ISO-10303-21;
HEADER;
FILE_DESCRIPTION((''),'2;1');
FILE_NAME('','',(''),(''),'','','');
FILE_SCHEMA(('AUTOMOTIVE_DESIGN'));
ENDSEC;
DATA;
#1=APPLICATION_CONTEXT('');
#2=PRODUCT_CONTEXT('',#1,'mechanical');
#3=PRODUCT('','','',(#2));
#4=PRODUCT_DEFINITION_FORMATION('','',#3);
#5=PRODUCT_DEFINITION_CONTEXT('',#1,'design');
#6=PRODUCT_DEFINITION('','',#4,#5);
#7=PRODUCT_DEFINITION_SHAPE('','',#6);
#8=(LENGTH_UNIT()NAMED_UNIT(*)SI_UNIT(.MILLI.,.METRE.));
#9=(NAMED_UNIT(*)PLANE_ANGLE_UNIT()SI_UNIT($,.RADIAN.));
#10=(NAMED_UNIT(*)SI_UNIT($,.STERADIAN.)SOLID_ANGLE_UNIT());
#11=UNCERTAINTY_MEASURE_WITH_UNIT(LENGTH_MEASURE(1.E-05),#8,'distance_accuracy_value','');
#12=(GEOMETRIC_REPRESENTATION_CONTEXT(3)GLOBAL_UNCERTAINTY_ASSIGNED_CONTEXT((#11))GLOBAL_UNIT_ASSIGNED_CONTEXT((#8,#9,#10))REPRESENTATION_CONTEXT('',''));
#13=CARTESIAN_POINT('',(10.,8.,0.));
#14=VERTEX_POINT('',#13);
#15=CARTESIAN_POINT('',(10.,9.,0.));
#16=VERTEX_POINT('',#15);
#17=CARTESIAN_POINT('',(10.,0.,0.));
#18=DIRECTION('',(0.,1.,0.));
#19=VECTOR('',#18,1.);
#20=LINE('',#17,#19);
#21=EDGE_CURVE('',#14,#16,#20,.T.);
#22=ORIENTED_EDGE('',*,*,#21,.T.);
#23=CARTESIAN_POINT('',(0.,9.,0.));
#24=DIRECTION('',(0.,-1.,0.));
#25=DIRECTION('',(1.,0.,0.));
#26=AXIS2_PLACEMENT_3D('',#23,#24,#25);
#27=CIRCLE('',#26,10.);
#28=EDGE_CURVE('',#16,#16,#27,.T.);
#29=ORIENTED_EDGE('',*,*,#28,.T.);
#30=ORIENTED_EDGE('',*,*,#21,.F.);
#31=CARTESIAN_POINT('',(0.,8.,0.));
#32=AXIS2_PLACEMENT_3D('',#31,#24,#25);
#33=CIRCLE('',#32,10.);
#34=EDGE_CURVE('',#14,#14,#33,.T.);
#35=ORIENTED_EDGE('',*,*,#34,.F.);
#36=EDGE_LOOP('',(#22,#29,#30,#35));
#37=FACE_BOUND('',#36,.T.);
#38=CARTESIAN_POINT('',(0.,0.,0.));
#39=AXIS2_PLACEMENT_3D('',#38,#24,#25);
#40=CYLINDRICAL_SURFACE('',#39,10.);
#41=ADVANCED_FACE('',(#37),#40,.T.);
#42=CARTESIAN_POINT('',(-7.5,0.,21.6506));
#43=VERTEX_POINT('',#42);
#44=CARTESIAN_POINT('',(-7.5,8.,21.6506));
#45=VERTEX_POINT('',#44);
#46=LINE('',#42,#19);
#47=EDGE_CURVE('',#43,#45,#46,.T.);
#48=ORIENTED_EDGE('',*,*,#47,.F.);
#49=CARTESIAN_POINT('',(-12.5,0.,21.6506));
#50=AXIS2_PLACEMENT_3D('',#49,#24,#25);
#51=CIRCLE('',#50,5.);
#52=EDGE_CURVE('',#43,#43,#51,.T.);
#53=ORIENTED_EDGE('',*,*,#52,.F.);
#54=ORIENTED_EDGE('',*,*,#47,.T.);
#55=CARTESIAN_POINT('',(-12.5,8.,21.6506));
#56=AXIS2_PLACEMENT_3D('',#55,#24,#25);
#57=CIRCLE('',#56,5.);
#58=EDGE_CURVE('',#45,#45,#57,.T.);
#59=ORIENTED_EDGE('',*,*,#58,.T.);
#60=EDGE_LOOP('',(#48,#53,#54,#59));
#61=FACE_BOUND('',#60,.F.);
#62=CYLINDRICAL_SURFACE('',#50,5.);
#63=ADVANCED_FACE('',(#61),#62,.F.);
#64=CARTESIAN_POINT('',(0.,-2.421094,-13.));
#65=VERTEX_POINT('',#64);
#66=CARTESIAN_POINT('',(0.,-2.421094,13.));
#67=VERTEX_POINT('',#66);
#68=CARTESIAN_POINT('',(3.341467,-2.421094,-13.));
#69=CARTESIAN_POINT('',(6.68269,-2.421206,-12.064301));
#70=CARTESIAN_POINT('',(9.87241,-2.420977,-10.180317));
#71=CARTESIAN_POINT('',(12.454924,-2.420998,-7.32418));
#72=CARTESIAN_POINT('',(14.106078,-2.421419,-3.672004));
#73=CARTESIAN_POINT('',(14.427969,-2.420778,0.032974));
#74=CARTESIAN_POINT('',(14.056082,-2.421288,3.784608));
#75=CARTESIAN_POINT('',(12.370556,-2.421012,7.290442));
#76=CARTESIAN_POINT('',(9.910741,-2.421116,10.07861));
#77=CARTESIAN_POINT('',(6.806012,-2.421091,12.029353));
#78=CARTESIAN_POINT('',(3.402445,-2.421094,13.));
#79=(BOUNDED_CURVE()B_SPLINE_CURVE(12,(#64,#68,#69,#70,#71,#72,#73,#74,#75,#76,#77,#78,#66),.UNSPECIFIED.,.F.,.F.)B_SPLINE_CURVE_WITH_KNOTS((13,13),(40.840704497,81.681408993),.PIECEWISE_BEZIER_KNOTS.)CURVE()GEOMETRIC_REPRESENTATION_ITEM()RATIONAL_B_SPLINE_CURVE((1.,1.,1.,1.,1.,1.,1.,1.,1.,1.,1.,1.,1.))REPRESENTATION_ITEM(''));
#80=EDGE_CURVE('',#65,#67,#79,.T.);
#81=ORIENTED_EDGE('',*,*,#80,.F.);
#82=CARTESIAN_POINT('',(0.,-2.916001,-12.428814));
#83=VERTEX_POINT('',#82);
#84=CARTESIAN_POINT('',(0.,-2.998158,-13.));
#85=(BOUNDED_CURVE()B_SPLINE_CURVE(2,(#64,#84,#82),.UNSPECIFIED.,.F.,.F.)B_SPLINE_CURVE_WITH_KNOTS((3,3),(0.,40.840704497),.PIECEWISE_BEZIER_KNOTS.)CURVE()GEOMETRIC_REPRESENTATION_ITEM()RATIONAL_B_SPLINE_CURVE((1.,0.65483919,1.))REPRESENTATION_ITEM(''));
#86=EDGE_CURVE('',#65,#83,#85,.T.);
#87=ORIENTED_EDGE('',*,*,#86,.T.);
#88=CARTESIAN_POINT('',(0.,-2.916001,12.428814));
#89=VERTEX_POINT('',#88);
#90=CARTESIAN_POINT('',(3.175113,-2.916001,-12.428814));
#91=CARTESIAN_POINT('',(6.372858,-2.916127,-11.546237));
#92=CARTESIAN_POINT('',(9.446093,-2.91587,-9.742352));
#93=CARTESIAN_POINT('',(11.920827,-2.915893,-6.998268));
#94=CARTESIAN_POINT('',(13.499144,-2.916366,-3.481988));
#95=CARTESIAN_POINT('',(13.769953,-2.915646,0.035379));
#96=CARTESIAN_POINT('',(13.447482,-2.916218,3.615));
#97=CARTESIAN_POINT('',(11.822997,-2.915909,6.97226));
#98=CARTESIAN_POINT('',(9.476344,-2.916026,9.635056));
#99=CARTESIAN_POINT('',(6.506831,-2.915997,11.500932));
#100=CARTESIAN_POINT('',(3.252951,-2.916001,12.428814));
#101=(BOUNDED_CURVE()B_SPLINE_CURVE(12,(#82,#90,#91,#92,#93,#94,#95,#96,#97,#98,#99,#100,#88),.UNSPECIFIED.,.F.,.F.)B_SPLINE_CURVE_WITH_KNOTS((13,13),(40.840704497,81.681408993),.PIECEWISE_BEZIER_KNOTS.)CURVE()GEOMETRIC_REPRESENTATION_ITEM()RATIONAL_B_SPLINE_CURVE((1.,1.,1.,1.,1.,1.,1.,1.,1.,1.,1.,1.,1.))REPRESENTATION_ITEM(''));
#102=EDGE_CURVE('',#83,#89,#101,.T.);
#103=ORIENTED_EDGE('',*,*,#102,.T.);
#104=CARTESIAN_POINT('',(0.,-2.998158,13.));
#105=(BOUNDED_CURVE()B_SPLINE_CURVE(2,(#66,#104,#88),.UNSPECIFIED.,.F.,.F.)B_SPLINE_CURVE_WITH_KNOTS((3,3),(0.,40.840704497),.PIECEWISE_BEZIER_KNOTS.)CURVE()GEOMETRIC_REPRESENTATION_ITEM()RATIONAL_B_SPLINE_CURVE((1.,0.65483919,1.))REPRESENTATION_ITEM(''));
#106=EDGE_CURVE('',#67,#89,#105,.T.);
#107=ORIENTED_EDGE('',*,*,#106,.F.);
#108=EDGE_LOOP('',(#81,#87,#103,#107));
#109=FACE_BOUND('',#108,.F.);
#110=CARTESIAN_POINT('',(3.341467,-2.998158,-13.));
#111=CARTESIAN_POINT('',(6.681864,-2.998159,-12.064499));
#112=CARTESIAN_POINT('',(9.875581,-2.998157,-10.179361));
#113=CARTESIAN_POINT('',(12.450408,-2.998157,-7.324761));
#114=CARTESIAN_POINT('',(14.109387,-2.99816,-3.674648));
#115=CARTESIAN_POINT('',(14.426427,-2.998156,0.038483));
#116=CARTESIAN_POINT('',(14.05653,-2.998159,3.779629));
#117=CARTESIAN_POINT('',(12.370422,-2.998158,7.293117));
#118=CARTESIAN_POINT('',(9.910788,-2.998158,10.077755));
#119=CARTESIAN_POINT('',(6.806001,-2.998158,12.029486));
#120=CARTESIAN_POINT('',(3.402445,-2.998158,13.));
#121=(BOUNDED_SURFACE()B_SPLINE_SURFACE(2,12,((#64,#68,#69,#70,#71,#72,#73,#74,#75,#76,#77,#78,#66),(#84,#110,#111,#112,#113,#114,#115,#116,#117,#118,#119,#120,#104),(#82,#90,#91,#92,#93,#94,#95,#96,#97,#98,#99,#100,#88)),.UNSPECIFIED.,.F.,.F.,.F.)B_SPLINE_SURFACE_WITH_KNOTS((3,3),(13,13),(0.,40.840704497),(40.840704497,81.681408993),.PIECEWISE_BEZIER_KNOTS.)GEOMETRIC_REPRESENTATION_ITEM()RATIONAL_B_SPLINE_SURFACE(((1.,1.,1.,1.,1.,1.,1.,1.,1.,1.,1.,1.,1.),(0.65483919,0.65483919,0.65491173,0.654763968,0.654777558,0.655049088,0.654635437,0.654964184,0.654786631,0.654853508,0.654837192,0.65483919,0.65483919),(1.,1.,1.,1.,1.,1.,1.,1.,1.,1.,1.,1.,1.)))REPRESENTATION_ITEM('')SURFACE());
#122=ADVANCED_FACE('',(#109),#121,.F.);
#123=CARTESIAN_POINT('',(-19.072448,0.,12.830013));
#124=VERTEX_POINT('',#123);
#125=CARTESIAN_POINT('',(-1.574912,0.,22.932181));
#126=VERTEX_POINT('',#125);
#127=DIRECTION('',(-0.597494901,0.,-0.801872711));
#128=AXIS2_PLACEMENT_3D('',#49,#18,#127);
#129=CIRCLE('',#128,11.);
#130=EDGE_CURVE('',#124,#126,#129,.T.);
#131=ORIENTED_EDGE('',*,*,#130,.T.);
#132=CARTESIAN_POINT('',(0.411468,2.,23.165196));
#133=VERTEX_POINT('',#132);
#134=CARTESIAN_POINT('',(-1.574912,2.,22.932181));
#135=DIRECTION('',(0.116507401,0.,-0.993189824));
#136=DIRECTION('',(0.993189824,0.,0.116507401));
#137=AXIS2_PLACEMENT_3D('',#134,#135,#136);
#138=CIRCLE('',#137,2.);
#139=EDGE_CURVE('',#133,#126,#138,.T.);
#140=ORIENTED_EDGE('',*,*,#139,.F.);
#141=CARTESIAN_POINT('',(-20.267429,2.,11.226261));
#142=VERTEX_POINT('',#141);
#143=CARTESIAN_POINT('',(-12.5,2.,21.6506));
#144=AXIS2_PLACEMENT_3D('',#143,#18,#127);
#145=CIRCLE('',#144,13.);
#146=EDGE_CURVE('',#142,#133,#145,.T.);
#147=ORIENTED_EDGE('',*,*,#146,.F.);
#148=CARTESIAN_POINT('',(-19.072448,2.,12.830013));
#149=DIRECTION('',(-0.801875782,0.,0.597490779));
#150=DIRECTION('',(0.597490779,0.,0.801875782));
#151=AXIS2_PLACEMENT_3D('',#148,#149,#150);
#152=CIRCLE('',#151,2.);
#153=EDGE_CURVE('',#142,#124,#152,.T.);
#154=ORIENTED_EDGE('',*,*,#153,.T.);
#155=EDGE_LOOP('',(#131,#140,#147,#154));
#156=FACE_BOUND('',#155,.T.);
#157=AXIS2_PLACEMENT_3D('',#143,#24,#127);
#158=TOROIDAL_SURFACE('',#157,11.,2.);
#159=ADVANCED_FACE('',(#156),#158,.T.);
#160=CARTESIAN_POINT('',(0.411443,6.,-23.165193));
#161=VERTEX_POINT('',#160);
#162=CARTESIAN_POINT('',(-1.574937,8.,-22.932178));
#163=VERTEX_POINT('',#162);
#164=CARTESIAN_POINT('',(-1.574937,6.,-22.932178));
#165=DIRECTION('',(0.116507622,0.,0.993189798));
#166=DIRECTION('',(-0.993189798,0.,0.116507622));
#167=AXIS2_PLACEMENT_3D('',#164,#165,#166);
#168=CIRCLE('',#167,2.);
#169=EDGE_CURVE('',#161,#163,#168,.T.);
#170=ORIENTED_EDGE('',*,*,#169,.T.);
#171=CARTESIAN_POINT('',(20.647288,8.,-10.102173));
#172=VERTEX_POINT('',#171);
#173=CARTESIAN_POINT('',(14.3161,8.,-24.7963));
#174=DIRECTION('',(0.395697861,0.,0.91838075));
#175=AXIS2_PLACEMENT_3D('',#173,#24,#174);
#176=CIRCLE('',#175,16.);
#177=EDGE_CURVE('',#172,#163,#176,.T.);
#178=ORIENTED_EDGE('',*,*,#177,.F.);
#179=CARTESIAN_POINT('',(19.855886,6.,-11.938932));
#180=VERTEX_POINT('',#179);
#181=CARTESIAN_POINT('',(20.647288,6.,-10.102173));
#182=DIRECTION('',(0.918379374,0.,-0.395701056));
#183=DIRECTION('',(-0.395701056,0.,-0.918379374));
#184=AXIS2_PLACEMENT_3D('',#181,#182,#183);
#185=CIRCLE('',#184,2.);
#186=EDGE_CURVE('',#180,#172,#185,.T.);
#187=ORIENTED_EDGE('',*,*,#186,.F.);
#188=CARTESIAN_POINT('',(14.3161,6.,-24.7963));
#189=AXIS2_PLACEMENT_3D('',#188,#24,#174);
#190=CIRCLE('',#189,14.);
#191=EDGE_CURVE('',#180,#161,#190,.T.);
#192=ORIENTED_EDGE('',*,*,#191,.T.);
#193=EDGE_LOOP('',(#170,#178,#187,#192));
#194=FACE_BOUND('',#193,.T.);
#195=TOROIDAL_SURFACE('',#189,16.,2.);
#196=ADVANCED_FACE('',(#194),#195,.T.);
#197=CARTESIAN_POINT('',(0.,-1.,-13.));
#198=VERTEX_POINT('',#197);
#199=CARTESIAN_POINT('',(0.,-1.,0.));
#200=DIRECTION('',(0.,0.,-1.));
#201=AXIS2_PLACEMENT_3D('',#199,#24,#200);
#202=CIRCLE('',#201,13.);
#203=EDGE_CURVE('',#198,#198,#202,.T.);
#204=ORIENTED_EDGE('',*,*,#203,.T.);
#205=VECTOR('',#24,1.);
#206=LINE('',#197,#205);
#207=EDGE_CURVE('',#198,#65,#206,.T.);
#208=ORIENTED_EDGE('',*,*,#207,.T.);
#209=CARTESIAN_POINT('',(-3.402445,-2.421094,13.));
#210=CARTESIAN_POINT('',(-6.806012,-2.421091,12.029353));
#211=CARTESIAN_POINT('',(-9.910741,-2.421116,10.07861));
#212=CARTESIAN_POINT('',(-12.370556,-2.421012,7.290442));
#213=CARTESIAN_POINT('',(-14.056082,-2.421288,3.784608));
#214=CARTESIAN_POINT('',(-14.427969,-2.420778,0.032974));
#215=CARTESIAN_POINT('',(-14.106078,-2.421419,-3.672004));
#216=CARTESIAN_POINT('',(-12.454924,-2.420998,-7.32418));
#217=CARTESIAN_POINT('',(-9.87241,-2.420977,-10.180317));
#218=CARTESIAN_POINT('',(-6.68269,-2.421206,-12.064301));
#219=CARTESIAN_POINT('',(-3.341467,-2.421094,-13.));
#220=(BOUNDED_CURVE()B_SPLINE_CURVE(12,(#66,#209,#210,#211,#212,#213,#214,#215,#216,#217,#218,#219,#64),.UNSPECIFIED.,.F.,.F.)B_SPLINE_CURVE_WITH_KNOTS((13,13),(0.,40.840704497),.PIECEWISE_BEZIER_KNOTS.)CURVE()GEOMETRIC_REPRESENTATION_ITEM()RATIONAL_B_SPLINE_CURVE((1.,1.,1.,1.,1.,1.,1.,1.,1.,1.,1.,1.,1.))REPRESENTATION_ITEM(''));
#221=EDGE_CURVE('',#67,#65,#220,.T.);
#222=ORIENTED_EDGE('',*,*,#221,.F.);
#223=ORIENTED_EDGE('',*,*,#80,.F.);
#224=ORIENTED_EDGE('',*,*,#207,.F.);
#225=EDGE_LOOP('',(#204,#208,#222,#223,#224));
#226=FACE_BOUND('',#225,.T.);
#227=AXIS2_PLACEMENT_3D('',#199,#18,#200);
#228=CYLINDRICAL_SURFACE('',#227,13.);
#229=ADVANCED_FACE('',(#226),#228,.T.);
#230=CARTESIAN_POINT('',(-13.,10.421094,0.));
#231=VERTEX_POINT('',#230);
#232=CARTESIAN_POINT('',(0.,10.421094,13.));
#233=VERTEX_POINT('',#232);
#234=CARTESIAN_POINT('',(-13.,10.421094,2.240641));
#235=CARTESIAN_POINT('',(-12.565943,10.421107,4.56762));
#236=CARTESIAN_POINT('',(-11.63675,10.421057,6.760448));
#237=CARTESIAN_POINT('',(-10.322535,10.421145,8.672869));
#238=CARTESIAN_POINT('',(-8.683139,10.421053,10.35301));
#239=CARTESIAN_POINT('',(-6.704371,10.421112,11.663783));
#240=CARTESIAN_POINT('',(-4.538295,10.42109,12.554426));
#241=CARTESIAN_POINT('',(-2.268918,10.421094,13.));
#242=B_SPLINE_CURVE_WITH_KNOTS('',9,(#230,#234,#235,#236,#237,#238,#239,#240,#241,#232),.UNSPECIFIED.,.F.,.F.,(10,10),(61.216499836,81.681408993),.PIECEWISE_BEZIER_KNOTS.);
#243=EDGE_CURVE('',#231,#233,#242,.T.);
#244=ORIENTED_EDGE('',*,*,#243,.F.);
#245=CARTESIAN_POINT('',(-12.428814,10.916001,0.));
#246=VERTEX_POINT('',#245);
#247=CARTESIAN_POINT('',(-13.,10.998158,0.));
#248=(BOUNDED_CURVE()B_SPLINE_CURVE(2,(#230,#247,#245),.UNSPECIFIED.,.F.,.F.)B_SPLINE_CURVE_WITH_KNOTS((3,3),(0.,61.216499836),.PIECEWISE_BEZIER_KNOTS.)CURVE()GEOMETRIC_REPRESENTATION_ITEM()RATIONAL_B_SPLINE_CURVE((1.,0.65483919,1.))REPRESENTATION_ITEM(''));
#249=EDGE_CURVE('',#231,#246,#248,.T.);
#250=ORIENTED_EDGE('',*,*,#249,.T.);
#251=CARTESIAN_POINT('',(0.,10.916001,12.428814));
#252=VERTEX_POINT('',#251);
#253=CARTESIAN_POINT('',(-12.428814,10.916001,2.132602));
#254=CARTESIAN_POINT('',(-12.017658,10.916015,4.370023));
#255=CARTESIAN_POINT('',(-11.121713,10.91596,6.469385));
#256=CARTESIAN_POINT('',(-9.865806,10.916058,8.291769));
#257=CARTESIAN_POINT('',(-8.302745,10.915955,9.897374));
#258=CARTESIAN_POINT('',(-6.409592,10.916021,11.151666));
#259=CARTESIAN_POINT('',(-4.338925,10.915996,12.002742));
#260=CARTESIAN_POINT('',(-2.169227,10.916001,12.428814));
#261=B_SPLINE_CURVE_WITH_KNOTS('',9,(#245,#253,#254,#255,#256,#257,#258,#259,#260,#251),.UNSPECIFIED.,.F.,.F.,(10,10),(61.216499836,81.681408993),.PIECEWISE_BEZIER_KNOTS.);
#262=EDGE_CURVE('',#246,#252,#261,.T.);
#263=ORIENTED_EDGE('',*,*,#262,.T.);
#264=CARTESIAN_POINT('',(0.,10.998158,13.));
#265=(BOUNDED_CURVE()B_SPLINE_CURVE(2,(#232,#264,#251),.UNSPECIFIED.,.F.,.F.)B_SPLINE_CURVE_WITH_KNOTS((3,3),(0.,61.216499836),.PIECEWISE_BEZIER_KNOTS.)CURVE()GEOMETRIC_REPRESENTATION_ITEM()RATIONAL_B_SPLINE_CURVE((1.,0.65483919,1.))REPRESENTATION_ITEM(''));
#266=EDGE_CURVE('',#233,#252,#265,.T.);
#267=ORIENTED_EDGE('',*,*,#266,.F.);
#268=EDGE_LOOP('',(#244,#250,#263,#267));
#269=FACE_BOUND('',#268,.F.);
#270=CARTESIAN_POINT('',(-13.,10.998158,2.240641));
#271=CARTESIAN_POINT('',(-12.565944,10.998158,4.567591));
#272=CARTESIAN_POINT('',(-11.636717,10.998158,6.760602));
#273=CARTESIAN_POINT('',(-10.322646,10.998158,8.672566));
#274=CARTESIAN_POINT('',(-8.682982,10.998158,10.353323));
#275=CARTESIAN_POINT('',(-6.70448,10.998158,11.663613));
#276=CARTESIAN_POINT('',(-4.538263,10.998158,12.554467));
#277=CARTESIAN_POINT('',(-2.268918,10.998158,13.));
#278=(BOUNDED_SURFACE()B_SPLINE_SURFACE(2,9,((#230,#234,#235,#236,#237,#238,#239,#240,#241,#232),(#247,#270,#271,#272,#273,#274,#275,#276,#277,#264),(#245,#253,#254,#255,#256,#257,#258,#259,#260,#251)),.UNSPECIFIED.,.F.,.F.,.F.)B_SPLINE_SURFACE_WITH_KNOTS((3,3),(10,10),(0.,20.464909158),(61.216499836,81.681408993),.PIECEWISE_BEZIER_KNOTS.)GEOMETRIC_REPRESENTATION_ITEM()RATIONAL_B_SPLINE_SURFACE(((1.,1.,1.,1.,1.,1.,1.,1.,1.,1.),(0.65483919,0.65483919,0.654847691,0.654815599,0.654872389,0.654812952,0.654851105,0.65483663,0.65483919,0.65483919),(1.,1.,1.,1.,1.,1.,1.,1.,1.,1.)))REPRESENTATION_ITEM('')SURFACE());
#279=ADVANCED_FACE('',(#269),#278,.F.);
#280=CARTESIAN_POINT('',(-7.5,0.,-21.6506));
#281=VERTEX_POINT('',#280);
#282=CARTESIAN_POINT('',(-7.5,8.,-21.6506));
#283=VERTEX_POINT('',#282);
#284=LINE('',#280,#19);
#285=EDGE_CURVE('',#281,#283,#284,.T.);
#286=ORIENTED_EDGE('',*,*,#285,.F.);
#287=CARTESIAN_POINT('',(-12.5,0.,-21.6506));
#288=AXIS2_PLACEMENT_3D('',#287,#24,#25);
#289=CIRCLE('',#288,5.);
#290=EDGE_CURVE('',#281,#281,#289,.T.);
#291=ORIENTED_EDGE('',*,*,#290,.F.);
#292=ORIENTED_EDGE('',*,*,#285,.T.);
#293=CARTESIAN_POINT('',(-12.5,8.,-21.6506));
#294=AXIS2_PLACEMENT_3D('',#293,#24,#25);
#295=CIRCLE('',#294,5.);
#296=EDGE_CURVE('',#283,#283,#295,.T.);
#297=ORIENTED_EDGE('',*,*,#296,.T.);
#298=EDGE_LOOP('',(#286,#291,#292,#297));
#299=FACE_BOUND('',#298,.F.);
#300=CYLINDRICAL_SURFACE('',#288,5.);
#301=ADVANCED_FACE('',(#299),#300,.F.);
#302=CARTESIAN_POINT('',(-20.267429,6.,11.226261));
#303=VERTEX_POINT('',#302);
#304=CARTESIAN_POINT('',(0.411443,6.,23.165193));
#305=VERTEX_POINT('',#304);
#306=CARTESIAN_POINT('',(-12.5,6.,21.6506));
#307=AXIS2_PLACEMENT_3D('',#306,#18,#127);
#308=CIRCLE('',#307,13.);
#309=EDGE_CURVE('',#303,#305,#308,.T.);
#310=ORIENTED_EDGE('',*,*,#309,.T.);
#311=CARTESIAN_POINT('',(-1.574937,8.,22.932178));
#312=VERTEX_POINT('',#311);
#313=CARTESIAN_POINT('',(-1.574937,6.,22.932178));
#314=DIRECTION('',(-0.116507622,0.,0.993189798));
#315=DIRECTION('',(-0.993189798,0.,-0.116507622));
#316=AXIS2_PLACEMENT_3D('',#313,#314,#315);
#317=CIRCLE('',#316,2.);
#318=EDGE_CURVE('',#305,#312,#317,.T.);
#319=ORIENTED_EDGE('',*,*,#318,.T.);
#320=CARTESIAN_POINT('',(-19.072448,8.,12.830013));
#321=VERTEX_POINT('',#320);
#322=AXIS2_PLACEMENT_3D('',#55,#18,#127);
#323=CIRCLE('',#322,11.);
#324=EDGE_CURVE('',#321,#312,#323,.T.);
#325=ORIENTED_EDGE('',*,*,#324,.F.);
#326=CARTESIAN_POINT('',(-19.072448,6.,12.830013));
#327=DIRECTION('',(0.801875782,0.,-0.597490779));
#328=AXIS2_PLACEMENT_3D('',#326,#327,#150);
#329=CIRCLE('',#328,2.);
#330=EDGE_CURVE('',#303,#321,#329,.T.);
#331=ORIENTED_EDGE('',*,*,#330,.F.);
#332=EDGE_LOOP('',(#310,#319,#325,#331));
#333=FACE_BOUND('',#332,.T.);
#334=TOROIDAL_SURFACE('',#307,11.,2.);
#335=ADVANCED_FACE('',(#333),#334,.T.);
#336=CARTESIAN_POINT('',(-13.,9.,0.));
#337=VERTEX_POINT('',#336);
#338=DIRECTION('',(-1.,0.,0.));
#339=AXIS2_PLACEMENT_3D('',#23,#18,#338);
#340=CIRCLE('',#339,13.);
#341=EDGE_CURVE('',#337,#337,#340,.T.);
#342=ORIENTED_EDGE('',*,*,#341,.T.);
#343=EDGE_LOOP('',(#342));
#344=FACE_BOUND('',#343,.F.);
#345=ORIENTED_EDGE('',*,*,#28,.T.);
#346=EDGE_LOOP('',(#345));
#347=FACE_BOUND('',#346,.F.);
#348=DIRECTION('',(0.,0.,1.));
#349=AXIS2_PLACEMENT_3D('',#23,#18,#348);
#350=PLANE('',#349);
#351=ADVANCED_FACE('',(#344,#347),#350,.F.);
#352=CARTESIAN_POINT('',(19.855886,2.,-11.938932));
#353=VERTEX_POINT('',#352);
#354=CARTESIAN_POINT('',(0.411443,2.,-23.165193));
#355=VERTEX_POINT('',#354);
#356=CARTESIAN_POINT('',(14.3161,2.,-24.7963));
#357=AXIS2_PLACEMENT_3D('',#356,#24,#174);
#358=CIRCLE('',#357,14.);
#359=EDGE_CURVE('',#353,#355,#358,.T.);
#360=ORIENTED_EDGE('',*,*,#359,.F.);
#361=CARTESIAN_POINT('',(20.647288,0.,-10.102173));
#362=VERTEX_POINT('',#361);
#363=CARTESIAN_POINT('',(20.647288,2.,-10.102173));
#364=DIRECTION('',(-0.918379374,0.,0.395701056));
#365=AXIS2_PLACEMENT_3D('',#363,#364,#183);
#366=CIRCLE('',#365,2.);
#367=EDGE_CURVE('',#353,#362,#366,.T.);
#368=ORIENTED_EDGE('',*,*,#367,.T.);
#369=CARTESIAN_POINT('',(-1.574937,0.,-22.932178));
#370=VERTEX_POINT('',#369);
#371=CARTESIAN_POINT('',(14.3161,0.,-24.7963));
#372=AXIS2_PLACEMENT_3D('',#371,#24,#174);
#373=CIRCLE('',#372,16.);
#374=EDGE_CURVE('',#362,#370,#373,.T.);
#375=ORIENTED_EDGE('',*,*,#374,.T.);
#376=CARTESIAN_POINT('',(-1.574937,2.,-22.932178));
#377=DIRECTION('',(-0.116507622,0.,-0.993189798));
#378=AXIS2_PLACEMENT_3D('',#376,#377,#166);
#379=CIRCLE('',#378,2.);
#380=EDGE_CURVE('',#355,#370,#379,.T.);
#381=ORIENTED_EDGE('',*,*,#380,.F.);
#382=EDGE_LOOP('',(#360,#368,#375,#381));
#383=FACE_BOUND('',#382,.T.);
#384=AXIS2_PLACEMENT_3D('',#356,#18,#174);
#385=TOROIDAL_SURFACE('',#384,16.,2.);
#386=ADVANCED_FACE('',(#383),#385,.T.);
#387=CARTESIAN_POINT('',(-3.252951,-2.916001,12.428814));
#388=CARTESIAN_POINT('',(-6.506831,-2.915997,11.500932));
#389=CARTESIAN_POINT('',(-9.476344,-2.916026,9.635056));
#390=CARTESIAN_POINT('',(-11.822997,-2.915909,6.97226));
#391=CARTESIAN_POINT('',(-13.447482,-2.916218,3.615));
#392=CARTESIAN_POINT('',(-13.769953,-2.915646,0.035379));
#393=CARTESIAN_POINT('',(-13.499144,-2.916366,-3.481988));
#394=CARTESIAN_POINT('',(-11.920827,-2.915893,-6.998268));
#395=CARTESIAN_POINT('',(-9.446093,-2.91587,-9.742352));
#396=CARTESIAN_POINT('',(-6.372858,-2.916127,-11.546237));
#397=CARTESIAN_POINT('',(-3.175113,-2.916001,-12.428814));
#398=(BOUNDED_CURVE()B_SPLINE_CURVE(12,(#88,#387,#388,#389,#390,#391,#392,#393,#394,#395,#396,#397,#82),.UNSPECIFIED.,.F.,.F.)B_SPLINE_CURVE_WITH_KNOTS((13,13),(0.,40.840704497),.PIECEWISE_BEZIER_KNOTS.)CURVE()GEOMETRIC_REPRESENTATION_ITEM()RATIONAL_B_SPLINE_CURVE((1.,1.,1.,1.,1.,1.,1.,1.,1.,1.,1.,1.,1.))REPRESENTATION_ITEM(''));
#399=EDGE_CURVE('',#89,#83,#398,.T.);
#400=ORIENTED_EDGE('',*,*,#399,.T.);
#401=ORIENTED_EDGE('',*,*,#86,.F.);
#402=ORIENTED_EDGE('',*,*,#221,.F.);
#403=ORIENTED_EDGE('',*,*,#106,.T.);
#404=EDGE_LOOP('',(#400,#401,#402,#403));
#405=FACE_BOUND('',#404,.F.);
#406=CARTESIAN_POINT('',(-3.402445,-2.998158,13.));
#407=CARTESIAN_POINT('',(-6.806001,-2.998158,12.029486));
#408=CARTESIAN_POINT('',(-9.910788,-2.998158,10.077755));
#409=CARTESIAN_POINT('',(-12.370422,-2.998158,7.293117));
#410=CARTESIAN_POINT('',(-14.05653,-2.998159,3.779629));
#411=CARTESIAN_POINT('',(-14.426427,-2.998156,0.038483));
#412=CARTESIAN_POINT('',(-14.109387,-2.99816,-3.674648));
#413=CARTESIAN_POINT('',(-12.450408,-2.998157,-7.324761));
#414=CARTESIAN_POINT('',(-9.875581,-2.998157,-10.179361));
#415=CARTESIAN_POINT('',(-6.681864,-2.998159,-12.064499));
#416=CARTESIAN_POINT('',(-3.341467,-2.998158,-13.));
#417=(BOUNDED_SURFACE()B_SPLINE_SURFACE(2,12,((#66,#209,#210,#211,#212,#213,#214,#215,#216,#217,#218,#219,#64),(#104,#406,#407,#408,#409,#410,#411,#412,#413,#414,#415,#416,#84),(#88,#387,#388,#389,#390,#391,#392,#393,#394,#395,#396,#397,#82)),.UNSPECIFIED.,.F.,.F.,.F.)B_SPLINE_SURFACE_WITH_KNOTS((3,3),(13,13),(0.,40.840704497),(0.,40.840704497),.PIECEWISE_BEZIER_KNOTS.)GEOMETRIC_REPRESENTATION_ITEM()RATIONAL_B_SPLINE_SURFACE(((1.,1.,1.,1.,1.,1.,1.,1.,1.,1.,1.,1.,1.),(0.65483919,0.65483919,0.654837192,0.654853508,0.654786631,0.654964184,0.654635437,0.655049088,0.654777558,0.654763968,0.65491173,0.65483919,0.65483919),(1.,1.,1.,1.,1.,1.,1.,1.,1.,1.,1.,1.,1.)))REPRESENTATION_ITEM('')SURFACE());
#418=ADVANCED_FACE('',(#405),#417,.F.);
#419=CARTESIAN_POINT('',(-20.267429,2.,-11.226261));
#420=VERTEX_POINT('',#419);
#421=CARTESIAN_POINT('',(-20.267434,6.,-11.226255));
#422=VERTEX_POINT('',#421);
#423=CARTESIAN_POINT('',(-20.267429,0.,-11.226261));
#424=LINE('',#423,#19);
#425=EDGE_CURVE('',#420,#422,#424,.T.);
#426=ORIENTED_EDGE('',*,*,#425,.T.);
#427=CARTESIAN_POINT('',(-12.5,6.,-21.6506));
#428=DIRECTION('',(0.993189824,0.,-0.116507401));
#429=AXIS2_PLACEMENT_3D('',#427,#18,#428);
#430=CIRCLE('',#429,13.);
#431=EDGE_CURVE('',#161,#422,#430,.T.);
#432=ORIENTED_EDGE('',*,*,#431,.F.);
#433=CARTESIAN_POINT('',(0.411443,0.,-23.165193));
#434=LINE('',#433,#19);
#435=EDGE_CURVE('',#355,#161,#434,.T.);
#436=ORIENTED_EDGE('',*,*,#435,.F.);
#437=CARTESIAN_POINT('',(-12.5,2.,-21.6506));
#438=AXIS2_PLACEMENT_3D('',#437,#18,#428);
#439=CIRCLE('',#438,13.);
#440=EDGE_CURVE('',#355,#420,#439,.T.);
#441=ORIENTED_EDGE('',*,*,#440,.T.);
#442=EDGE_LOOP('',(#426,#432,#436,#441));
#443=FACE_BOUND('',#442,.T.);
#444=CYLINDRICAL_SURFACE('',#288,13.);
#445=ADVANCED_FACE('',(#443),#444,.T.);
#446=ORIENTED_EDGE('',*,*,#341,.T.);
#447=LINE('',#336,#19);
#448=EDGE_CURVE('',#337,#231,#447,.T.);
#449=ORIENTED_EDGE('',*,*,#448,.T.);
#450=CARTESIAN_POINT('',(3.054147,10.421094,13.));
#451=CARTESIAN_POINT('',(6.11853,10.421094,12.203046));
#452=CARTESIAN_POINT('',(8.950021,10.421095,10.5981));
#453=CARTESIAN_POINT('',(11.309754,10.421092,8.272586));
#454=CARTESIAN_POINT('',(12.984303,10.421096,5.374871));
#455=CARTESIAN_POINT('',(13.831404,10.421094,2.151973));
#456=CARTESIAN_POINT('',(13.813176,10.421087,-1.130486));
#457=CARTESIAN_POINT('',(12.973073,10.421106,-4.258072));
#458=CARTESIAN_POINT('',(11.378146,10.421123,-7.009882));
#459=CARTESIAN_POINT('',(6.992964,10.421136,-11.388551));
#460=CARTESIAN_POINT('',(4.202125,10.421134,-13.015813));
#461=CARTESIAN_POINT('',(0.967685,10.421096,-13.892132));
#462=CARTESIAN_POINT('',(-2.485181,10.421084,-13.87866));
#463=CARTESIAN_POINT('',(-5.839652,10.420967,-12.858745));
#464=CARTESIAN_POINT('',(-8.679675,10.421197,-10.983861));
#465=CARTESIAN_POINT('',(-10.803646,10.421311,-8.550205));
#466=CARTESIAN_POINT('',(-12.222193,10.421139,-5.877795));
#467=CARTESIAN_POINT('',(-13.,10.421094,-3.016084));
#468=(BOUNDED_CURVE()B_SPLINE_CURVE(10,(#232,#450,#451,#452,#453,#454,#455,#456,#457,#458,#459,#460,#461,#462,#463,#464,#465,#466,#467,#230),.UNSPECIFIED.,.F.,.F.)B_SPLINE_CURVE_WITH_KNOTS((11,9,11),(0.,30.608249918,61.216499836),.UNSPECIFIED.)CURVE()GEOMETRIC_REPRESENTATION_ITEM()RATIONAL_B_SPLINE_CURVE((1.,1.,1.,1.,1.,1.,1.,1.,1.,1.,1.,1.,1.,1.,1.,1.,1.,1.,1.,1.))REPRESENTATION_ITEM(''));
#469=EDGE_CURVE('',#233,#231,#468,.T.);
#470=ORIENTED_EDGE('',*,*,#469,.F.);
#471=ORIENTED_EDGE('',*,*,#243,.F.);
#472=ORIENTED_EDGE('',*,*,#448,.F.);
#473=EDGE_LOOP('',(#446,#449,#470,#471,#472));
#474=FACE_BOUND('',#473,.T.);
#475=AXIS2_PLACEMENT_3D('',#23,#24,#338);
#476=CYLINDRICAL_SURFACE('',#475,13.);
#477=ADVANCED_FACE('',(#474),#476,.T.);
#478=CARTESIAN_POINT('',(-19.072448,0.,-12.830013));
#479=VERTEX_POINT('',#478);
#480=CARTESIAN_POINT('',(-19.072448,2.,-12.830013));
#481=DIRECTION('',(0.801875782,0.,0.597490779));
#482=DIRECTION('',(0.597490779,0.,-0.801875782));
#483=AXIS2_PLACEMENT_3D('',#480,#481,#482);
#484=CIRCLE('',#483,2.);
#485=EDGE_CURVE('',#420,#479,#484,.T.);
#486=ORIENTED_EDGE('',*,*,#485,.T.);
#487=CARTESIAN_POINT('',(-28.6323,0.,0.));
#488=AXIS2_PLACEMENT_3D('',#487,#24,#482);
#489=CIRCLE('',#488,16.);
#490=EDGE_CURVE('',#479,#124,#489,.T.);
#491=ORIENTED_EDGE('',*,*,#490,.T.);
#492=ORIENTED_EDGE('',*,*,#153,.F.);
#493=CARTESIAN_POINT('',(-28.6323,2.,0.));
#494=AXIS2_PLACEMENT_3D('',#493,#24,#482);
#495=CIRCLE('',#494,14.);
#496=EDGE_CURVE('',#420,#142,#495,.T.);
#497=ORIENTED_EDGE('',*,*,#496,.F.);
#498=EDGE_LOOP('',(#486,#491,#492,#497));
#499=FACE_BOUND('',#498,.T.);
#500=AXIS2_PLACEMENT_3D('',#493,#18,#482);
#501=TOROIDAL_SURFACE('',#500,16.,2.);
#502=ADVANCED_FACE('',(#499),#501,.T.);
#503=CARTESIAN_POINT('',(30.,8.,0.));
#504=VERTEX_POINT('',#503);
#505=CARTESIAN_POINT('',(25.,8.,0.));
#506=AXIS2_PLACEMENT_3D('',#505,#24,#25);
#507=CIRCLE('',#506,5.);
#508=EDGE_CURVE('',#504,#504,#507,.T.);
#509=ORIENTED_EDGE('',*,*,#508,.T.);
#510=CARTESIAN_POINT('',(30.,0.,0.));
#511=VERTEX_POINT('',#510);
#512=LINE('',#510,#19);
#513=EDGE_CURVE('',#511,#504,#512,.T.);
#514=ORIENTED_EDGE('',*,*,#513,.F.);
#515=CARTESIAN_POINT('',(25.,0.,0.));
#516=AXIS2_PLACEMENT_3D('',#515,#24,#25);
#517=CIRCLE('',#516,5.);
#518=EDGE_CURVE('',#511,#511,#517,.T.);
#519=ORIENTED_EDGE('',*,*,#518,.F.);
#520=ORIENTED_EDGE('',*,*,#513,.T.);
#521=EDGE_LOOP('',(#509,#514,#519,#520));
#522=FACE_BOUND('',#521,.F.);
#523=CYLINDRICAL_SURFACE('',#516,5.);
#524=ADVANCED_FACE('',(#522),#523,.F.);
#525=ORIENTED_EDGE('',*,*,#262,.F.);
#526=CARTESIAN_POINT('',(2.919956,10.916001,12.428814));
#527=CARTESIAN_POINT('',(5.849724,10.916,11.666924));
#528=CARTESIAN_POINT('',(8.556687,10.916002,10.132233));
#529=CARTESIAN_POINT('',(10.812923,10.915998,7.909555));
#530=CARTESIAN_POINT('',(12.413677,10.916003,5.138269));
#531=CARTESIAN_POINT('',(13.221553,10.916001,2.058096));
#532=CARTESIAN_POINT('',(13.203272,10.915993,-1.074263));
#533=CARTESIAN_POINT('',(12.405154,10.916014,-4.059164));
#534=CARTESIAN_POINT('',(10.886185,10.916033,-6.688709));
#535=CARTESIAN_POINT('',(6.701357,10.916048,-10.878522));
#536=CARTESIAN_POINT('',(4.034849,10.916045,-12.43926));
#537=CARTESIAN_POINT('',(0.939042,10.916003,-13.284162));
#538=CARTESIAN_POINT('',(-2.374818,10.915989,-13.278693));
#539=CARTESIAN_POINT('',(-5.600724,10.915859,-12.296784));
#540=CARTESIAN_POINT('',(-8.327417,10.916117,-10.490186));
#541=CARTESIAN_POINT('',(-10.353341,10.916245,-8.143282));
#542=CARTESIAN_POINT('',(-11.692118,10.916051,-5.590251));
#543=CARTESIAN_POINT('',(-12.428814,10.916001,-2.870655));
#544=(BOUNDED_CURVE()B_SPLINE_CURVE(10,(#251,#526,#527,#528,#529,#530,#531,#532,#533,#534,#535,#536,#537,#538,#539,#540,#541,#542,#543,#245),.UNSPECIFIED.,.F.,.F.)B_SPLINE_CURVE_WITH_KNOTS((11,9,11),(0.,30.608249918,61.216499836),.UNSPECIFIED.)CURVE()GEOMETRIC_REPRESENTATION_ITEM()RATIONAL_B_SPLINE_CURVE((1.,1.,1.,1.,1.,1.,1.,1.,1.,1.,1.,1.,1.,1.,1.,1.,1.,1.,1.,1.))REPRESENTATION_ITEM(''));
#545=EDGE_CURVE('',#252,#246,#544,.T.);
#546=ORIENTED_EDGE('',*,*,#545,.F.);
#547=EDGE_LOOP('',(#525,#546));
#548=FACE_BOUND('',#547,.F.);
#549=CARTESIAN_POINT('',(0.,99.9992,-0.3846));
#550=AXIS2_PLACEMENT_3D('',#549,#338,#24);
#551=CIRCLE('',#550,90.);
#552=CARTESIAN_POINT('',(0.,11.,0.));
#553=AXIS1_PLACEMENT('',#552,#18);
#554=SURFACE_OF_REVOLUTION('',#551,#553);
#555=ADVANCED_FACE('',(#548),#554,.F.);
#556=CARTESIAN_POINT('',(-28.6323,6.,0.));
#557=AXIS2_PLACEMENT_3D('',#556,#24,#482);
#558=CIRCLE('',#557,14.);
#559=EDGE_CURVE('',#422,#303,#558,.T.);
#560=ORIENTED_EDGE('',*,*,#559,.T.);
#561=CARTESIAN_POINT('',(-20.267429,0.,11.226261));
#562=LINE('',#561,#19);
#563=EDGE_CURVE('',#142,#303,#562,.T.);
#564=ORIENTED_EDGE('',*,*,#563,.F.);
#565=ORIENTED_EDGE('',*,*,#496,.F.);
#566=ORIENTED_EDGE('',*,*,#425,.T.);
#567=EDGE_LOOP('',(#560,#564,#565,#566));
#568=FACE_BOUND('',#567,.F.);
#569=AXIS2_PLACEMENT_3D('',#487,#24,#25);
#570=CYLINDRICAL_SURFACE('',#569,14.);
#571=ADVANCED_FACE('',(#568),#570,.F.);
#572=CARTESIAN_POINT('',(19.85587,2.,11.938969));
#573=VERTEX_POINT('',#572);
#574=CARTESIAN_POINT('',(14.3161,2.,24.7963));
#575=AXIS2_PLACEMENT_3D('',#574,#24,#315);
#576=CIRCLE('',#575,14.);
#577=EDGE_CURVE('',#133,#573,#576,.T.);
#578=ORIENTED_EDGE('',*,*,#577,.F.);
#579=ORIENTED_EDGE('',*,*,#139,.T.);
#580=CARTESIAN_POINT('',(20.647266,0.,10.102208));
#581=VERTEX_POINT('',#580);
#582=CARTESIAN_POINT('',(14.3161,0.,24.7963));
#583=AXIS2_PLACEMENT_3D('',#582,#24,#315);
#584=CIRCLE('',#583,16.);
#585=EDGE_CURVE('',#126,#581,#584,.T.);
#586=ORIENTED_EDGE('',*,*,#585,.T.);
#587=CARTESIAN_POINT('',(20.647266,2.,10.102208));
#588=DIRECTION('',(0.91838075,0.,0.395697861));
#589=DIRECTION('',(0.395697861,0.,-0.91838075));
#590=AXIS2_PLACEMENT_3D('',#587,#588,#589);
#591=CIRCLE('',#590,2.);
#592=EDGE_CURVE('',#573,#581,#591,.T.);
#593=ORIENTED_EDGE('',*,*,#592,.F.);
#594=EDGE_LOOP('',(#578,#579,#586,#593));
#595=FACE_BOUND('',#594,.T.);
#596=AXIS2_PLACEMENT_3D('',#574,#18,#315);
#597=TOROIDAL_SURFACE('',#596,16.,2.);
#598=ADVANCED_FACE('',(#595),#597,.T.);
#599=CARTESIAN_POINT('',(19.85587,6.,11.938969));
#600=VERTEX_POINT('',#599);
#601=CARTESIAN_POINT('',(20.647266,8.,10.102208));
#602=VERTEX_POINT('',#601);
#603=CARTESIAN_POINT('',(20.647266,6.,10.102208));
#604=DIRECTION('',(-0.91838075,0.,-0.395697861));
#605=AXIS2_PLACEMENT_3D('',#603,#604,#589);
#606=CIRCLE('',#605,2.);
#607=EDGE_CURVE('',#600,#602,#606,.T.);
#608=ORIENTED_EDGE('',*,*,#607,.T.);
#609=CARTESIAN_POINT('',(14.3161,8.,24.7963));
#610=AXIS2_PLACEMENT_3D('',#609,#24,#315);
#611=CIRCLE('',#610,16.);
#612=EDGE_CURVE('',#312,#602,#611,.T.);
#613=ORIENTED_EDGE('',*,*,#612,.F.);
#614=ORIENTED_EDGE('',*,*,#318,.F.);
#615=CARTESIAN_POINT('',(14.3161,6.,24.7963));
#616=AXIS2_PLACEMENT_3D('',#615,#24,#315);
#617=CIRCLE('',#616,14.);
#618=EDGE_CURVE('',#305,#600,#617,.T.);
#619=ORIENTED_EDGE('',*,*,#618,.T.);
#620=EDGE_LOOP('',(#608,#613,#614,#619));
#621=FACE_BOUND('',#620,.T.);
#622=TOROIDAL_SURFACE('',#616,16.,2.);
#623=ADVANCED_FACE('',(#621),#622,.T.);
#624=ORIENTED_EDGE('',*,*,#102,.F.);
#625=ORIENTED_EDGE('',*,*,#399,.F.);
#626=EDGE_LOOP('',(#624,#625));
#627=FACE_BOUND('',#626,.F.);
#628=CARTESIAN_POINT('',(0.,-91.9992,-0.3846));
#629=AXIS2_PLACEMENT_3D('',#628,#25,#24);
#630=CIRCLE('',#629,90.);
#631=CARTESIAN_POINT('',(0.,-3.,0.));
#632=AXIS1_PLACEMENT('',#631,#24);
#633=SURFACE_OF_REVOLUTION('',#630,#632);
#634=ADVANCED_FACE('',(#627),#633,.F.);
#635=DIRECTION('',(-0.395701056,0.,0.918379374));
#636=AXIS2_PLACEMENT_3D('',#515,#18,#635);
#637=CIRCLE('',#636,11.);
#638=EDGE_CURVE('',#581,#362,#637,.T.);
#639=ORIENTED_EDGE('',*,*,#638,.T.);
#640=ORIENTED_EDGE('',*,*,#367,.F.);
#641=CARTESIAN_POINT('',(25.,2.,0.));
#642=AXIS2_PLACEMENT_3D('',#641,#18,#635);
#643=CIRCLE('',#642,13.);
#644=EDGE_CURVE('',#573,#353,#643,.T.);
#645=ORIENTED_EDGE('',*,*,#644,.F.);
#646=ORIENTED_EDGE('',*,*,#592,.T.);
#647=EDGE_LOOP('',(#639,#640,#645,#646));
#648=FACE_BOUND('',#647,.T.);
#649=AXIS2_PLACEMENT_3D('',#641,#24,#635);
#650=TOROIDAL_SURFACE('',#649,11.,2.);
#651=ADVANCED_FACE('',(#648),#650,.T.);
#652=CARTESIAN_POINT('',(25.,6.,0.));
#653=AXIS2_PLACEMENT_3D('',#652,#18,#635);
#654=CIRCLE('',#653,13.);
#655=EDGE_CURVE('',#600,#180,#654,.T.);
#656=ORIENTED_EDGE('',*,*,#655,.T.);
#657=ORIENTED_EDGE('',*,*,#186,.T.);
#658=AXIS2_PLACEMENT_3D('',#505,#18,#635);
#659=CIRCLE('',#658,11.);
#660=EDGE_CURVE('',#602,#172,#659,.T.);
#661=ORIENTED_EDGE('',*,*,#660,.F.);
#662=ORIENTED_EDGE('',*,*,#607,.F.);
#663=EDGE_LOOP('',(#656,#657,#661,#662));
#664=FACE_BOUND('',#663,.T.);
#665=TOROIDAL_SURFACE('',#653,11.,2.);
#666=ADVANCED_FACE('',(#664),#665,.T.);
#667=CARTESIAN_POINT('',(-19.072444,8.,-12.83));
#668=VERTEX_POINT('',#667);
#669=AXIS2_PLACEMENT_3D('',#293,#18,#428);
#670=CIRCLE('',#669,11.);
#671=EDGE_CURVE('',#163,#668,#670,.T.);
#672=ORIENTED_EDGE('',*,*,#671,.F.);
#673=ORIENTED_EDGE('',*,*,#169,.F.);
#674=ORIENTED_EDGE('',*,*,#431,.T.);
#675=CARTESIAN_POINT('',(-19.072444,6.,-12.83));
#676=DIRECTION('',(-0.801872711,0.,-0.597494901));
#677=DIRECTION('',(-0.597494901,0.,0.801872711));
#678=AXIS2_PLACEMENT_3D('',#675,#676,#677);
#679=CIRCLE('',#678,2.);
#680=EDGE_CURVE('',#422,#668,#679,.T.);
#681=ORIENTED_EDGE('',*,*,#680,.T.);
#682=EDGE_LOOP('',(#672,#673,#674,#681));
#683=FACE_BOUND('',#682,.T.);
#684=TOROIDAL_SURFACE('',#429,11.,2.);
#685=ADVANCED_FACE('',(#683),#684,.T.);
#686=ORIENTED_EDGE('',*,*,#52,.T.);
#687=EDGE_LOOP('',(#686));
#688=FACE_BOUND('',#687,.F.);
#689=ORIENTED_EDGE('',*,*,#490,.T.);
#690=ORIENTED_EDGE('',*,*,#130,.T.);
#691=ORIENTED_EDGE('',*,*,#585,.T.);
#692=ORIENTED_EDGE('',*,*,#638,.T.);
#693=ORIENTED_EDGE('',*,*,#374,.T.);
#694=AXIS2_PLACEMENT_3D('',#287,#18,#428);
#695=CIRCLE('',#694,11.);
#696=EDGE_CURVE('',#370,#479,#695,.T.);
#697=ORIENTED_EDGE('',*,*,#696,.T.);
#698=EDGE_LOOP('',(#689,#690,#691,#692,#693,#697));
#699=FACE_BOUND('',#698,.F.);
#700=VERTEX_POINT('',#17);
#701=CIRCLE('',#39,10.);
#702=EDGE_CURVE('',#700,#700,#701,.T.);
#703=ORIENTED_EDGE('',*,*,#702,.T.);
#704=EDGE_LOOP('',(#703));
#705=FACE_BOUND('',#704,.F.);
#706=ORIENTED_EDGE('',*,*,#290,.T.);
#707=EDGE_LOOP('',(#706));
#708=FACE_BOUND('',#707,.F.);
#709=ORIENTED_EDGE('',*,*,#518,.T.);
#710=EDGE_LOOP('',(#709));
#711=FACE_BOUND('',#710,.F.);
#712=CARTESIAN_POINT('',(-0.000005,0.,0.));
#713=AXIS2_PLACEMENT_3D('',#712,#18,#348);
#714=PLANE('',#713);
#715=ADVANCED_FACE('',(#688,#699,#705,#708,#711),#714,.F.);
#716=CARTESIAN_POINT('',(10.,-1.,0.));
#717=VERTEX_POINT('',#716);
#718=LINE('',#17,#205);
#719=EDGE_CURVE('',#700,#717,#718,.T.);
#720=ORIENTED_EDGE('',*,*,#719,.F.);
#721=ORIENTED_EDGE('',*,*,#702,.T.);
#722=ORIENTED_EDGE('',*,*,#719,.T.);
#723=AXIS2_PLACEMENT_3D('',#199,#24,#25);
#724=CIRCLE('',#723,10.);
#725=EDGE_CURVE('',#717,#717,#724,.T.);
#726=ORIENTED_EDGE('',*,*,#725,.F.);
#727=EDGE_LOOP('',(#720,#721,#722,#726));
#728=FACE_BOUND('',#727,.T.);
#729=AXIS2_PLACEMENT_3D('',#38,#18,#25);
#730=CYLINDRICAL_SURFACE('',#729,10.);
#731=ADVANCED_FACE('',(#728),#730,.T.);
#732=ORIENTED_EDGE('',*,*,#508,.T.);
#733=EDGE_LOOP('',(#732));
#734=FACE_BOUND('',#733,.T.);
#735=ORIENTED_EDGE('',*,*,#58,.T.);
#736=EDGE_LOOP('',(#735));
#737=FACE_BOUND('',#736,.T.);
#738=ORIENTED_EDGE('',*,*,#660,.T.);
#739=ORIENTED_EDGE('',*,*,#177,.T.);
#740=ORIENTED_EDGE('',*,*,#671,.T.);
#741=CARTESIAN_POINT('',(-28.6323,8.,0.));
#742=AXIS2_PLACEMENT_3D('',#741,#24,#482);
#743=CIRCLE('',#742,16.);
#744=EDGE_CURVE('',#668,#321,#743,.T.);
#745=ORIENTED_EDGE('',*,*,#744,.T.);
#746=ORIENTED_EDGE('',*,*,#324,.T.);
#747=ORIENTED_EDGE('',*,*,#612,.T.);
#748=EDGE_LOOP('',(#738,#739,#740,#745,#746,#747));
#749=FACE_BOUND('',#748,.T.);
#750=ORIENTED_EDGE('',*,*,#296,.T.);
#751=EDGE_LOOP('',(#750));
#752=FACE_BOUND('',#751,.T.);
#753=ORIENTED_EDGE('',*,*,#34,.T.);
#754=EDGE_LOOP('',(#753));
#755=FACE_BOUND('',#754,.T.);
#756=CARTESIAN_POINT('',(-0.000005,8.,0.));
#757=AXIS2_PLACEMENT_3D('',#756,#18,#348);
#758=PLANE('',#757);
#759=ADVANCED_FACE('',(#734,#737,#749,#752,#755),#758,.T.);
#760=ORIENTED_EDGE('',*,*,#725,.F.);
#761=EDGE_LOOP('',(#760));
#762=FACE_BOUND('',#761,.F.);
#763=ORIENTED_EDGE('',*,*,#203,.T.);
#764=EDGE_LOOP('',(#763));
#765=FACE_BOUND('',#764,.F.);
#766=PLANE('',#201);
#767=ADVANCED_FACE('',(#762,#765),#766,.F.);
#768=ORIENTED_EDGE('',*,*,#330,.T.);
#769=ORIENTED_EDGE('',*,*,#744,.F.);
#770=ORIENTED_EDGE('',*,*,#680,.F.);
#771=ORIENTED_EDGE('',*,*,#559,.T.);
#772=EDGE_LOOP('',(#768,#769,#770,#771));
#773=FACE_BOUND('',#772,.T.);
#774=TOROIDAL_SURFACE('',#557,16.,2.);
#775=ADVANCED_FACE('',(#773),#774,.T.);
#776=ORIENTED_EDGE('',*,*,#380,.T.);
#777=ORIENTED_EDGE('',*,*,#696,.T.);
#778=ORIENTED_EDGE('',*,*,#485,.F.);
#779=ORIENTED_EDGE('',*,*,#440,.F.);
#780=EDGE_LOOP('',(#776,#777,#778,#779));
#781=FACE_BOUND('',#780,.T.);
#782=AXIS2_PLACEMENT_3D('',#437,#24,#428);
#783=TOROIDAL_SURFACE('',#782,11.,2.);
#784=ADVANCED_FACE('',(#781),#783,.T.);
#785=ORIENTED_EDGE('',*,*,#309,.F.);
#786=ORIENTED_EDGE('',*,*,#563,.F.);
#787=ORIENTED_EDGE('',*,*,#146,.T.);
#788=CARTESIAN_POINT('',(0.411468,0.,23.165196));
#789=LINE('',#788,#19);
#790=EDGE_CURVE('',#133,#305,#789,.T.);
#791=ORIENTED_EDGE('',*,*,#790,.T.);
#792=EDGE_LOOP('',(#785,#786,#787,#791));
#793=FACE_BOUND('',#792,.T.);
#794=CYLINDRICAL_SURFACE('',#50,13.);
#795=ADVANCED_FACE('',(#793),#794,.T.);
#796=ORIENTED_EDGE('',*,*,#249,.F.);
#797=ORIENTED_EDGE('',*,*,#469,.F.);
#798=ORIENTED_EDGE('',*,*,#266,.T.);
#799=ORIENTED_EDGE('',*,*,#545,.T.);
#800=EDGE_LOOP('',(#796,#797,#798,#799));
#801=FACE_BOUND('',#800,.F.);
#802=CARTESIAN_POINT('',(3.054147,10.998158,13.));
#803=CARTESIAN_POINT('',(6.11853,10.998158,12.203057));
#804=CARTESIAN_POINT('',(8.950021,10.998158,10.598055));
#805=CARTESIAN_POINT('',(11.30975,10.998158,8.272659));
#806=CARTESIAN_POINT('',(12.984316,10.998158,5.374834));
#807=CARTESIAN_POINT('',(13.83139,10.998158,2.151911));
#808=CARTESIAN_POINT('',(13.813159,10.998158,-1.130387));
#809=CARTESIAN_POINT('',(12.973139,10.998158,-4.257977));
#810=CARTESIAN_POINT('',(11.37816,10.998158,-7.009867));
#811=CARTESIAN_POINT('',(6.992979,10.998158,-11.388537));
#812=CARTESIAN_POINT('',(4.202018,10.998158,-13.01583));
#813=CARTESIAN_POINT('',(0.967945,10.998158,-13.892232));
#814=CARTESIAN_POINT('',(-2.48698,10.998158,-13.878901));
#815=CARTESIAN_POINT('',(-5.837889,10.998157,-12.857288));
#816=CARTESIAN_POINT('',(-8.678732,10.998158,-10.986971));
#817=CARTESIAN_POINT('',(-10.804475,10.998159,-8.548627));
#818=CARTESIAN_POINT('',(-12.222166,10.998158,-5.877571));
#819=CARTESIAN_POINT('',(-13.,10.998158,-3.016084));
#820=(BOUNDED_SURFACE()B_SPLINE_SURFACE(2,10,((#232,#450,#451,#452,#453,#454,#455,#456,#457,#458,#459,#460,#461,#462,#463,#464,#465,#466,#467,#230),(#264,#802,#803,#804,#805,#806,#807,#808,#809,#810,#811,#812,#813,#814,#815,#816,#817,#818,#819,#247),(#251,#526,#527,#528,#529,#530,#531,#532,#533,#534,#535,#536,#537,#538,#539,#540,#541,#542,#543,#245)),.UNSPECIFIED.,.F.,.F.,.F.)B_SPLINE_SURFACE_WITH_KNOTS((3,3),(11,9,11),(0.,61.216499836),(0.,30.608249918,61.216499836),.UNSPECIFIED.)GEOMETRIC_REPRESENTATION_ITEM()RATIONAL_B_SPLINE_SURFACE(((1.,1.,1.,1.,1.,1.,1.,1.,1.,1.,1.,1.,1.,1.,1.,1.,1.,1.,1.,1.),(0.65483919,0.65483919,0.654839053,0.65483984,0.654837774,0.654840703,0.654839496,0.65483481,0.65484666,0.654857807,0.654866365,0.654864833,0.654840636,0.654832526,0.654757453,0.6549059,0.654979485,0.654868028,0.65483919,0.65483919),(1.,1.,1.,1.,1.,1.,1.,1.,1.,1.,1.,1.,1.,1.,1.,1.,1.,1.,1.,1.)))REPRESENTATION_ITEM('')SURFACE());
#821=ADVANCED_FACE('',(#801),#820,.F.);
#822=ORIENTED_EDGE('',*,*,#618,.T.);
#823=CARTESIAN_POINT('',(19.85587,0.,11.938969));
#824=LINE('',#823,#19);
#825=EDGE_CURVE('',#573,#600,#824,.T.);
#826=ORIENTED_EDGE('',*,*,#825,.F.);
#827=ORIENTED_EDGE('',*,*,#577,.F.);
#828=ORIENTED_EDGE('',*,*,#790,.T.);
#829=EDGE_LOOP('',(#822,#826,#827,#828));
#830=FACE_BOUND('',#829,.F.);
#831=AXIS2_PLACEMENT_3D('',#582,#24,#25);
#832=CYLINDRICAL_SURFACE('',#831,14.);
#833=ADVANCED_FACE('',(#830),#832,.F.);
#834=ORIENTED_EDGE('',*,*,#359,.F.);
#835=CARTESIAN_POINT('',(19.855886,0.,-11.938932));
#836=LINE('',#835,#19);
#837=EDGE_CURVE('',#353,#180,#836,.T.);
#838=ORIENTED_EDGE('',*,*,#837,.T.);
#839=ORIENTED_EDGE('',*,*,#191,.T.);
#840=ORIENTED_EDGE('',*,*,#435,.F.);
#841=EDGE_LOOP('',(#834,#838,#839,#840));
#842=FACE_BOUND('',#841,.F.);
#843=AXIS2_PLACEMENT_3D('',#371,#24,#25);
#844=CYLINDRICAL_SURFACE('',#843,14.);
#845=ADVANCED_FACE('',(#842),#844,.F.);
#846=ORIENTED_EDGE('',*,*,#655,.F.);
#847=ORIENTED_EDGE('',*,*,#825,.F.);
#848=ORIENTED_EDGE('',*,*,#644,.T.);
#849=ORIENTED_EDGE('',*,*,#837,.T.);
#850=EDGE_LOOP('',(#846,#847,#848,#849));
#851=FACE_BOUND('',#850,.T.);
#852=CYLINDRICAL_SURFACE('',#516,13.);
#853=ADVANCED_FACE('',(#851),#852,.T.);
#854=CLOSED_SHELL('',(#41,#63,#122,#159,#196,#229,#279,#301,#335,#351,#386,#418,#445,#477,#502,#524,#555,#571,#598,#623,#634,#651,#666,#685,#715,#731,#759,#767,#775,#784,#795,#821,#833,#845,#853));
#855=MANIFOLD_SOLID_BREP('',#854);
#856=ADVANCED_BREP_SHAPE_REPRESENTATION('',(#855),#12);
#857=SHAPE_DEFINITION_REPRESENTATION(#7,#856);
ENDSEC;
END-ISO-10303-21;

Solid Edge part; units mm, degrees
sketch "Sketch1" plane through (0, 0, 0) normal (0, -1, 0) x (1, 0, 0)
  arc A0 (-20.2674, -11.2263) -> (-20.2674, 11.2263) centre (-28.6323, 0) ccw
  arc A1 (-20.2674, 11.2263) -> (0.4115, 23.1652) centre (-12.5, 21.6506) cw
  arc A2 (0.4115, 23.1652) -> (19.8559, 11.9389) centre (14.3161, 24.7963) ccw
  arc A3 (19.8559, -11.9389) -> (0.4115, -23.1652) centre (14.3161, -24.7963) ccw
  arc A4 (-20.2674, -11.2263) -> (0.4115, -23.1652) centre (-12.5, -21.6506) ccw
  arc A5 (19.8559, 11.9389) -> (19.8559, -11.9389) centre (25, 0) cw
  circle A6 centre (-12.5, -21.6506) radius 10
  circle A7 centre (-12.5, 21.6506) radius 10
  circle A8 centre (25, 0) radius 10
  circle A9 centre (0, 0) radius 10
extrude "Protrusion1" add sketch "Sketch1" against normal blind 8
sketch "Sketch2" plane through (0, 0, 0) normal (0, -1, 0) x (1, 0, 0)
  circle A0 centre (-12.5, -21.6506) radius 10
  circle A1 centre (-12.5, -21.6506) radius 9
  circle A2 centre (-12.5, 21.6506) radius 9
  circle A3 centre (-12.5, 21.6506) radius 10
  circle A4 centre (25, 0) radius 10
  circle A5 centre (25, 0) radius 9
extrude "ExtrudedProtrusion_11" add sketch "Sketch2" against normal blind 8
sketch "Sketch3" plane through (0, 0, 0) normal (0, -1, 0) x (1, 0, 0)
  circle A0 centre (-12.5, -21.6506) radius 9
  circle A1 centre (-12.5, -21.6506) radius 6
  circle A2 centre (-12.5, 21.6506) radius 9
  circle A3 centre (-12.5, 21.6506) radius 6
  circle A4 centre (25, 0) radius 9
  circle A5 centre (25, 0) radius 6
extrude "Protrusion2" add sketch "Sketch3" against normal blind 8
sketch "Sketch4" plane through (0, 0, 0) normal (0, -1, 0) x (1, 0, 0)
  circle A0 centre (-12.5, -21.6506) radius 6
  circle A1 centre (-12.5, -21.6506) radius 5
  circle A2 centre (-12.5, 21.6506) radius 6
  circle A3 centre (-12.5, 21.6506) radius 5
  circle A4 centre (25, 0) radius 6
  circle A5 centre (25, 0) radius 5
extrude "Protrusion3" add sketch "Sketch4" against normal blind 8
sketch "Sketch5" plane through (0, 0, 0) normal (0, -1, 0) x (1, 0, 0)
  circle A0 centre (0, 0) radius 10
extrude "ExtrudedProtrusion_14" add sketch "Sketch5" against normal blind 9
sketch "Sketch6" plane through (0, 0, 0) normal (0, -1, 0) x (1, 0, 0)
  circle A0 centre (0, 0) radius 10
extrude "ExtrudedProtrusion_15" add sketch "Sketch6" along normal blind 1
sketch "Sketch7" plane through (0, 9, 0) normal (0, 1, 0) x (-1, 0, 0)
  circle A0 centre (0, 0) radius 13
extrude "ExtrudedProtrusion_16" add sketch "Sketch7" along normal blind 2
sketch "Sketch8" plane through (0, -1, 0) normal (0, -1, 0) x (0, 0, -1)
  circle A0 centre (0, 0) radius 13
extrude "ExtrudedProtrusion_17" add sketch "Sketch8" along normal blind 2
fillet "Round_4" radius 2 6 edges at (7.3161, 8, 12.6719) (38, 8, 0) (-19, 8, -32.909) (-19, 8, 32.909) (-14.6323, 8, 0) (7.3161, 8, -12.6719)
fillet "Round_5" radius 2 5 edges at (-14.6323, 0, 0) (-19, 0, 32.909) (38, 0, 0) (7.3161, 0, -12.6719) (-19, 0, -32.909)
sketch "Sketch9" plane through (0, 0, 0) normal (-1, 0, 0) x (0, -1, 0)
  line L0 (-11, 13) -> (-11, 0)
  line L1 (-11, 0) -> (-10, 0)
  arc A0 (-10, 0) -> (-11, 13) centre (-99.9992, -0.3846) ccw
revolve "RevolvedCutout1" cut sketch "Sketch9" angle 360 about axis through (0, 11, 0) along (0, 1, 0)
sketch "Sketch10" plane through (0, 0, 0) normal (-1, 0, 0) x (0, -1, 0)
  line L0 (3, 0) -> (3, 13)
  arc A0 (2, 0) -> (3, 13) centre (91.9992, -0.3846) cw
  line L1 (3, 0) -> (2, 0)
revolve "RevolvedCutout2" cut sketch "Sketch10" angle 360 about axis through (0, -3, 0) along (0, -1, 0)
fillet "Round_6" radius 0.5 2 edges at (0, -3, 13) (13, 11, 0)
